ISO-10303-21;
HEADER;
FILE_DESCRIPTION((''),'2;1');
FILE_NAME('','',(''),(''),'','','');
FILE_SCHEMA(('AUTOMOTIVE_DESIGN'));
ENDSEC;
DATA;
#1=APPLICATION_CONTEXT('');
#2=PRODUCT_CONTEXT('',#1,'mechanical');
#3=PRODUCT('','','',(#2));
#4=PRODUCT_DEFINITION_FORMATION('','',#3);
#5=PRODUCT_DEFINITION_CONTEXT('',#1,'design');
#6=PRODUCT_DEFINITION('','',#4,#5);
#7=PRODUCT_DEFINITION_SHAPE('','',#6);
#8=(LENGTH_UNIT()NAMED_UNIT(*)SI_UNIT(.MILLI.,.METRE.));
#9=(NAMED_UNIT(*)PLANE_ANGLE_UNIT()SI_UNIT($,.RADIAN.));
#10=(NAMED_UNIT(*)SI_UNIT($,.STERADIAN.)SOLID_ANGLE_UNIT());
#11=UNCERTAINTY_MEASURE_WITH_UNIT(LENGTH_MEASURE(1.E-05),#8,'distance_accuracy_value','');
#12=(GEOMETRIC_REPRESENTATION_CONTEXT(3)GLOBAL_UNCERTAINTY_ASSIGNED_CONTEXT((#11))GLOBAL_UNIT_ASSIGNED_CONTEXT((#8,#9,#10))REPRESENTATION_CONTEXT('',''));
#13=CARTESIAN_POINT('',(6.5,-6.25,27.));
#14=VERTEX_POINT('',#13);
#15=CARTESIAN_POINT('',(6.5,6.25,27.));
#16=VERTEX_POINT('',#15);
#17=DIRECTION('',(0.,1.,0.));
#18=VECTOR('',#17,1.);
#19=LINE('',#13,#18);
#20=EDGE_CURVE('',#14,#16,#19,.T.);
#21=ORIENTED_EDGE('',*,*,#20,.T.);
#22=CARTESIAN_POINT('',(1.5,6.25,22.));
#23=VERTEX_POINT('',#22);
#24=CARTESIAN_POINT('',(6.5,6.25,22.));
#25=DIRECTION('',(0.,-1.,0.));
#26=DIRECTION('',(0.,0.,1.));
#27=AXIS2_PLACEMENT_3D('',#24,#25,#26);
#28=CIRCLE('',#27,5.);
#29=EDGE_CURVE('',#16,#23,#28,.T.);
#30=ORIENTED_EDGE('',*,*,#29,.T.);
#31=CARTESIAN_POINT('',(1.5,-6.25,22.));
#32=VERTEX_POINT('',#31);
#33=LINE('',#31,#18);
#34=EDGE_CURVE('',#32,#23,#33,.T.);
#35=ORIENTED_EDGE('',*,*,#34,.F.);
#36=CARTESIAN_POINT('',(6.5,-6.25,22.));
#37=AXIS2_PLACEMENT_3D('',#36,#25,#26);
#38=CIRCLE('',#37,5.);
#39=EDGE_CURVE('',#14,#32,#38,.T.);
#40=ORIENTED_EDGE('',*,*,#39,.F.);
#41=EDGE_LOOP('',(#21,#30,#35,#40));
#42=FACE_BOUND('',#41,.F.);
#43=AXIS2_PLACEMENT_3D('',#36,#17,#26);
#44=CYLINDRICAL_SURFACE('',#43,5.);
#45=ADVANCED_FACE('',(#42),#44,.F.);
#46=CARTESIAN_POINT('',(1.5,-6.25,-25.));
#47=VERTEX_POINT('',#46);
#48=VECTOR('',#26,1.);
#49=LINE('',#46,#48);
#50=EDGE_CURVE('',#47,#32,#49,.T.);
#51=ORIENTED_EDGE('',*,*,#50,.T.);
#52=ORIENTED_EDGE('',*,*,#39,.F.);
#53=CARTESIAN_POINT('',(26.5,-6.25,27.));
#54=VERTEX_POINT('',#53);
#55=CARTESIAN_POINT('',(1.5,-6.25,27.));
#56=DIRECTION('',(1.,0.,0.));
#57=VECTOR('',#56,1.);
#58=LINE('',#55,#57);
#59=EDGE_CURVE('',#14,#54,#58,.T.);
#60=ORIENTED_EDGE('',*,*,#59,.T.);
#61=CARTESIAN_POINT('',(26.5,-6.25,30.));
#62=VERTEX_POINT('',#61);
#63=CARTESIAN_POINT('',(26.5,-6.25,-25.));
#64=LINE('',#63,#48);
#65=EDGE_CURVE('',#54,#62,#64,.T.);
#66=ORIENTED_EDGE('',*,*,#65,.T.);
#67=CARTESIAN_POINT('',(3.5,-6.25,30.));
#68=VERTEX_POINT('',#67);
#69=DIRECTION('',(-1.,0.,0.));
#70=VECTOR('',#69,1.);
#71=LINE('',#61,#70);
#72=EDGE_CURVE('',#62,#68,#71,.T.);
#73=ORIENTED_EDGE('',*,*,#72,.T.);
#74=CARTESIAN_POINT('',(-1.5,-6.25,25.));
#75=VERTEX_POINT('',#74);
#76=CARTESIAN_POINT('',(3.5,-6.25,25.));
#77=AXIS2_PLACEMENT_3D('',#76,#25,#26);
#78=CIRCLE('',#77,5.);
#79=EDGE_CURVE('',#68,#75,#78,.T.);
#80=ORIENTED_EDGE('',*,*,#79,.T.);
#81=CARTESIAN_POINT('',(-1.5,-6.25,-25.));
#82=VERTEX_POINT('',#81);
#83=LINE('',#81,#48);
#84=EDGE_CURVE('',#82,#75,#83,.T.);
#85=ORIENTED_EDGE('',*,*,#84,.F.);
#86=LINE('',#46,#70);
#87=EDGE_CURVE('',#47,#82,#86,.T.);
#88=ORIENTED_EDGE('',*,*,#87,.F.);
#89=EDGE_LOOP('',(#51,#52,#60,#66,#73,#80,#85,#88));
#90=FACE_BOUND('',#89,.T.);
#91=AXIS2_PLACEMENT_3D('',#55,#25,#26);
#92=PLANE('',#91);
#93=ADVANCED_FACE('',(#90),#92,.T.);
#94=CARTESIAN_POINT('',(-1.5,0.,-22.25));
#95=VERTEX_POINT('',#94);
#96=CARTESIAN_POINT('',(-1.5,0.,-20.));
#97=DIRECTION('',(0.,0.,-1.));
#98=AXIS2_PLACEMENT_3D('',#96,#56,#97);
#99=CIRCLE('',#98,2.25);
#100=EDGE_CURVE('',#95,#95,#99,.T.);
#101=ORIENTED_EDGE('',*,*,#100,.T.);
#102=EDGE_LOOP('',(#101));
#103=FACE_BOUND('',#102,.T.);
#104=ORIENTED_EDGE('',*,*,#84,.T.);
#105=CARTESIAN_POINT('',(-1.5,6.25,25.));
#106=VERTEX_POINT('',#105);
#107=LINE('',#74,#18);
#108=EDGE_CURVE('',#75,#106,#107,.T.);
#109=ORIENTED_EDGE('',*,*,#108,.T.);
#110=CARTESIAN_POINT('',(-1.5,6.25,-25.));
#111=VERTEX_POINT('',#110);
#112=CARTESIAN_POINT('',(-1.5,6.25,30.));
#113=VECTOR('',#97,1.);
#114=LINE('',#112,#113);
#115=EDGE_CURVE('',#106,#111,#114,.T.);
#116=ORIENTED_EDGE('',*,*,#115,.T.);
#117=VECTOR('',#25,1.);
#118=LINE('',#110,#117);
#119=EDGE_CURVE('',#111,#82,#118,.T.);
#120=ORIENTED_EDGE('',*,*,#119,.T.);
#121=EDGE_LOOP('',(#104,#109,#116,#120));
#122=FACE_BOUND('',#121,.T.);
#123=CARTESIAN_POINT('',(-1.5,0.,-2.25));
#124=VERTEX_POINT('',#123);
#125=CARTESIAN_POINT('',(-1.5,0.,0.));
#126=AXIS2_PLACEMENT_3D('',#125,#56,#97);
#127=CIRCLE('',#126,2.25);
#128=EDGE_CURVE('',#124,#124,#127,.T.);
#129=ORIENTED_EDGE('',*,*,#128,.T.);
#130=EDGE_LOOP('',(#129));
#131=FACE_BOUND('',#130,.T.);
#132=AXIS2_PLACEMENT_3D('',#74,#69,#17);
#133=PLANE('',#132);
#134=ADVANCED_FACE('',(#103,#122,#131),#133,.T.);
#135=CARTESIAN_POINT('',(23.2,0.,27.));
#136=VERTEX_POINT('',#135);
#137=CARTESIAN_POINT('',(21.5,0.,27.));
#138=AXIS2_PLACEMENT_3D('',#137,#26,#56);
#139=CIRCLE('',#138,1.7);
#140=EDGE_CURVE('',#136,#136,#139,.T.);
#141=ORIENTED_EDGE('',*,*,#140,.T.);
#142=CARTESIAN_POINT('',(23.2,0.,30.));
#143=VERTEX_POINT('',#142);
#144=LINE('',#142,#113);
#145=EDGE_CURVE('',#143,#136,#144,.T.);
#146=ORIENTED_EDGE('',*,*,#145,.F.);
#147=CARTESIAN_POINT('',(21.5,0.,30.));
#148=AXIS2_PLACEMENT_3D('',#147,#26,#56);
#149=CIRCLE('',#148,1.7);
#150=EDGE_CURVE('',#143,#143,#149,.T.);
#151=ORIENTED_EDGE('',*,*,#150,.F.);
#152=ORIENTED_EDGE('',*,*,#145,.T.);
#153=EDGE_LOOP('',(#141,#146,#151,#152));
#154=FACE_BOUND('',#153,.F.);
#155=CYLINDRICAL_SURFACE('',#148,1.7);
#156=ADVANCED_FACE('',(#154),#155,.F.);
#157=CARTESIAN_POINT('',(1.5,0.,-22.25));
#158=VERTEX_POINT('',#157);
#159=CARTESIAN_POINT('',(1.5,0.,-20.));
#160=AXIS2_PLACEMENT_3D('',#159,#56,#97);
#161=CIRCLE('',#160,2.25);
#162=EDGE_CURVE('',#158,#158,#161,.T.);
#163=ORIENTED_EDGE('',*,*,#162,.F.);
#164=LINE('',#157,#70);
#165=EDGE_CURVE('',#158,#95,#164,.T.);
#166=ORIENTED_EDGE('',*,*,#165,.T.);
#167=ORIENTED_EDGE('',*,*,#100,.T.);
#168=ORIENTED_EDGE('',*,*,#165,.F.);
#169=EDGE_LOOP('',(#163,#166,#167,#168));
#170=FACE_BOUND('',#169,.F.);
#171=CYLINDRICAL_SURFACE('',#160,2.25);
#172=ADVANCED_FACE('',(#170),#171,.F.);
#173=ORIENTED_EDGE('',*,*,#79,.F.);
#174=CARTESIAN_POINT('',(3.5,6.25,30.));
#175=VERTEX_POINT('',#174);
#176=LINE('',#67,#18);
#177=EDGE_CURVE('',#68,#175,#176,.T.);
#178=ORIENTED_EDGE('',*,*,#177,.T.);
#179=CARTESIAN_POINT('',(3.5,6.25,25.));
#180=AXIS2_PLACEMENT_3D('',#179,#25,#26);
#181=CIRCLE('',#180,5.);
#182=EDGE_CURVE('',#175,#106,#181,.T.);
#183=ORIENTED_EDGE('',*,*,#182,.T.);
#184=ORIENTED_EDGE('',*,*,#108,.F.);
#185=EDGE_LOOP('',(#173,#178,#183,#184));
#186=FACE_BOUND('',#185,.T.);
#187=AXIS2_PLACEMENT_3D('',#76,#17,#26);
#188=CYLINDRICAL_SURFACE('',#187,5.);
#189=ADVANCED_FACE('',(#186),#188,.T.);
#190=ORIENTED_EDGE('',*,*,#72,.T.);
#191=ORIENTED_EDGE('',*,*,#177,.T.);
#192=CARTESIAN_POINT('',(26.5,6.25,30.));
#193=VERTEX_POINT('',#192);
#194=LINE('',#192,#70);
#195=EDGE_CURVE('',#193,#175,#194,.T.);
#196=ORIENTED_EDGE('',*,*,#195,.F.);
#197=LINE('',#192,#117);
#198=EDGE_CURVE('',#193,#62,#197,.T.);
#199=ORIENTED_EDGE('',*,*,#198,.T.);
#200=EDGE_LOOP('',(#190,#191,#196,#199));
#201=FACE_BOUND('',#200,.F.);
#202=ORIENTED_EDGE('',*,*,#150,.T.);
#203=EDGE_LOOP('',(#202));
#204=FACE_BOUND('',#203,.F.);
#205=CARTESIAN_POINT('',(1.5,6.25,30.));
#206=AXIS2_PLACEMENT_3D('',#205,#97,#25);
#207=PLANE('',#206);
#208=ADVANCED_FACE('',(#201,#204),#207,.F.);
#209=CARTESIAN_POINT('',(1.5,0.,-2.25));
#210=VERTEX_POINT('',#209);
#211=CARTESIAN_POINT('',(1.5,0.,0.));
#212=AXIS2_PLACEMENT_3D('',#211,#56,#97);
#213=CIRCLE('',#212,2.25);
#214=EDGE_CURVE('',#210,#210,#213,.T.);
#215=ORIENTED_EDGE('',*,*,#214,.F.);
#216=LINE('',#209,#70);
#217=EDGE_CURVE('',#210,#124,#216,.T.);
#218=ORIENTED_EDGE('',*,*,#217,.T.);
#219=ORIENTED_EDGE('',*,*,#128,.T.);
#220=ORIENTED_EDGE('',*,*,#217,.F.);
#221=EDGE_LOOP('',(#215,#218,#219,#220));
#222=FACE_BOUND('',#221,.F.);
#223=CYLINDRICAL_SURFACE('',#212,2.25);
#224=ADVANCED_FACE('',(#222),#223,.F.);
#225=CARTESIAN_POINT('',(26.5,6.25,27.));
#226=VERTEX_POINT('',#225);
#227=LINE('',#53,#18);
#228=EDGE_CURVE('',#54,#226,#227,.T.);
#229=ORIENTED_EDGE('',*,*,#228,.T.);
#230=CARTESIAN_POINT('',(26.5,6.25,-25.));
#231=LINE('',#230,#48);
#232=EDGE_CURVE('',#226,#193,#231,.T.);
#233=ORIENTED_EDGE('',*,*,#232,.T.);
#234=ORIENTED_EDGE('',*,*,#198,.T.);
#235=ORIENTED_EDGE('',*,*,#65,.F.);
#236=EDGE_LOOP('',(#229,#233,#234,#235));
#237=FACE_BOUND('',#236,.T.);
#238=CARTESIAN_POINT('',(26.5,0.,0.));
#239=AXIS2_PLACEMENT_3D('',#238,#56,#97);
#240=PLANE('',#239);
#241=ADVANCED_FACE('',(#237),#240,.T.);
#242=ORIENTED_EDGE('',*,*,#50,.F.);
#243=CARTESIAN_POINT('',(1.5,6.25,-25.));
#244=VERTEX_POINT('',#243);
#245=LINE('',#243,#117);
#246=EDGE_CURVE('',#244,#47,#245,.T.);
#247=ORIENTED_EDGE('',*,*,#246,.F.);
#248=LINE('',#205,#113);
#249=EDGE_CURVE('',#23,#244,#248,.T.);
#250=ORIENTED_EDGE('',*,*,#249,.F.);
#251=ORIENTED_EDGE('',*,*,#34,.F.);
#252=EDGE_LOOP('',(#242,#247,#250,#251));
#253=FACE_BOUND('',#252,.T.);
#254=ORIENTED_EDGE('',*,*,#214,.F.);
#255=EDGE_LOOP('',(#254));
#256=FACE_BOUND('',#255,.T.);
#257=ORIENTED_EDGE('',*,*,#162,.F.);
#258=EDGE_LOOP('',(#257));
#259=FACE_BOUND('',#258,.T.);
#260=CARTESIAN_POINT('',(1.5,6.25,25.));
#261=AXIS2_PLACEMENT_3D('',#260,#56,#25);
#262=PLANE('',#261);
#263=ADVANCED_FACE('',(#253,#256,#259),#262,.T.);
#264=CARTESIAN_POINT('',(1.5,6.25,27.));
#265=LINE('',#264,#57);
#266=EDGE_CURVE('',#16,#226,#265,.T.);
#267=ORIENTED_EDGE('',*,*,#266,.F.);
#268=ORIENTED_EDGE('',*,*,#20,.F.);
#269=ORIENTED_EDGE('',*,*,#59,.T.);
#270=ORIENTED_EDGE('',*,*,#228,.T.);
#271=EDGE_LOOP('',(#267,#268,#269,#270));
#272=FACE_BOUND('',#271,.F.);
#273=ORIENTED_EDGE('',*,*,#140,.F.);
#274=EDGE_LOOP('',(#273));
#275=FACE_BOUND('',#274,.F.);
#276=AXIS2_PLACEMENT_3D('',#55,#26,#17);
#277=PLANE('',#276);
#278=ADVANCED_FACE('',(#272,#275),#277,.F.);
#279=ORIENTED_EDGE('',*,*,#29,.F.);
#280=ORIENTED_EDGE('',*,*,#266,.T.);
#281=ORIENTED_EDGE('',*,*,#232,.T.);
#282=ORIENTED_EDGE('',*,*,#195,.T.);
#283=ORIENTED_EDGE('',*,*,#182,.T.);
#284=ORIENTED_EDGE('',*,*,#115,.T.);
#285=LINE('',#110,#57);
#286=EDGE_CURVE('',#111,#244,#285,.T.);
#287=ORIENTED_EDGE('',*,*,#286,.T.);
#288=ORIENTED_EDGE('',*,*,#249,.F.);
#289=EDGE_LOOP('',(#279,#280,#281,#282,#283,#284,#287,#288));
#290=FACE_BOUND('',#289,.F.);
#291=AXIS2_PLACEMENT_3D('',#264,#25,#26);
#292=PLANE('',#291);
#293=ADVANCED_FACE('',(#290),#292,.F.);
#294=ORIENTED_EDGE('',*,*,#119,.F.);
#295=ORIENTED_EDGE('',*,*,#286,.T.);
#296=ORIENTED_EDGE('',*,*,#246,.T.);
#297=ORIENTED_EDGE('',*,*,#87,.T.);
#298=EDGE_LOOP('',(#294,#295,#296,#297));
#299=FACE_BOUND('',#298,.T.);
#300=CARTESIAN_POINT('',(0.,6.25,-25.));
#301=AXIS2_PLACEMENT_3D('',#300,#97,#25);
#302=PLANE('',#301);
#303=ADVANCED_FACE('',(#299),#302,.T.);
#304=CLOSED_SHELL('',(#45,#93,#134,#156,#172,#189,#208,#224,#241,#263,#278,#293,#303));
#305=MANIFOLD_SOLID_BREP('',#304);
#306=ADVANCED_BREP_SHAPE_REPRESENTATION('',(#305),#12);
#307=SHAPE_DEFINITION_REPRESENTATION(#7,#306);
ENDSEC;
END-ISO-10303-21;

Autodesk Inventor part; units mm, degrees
ref_plane "YZ Plane" through (0, 0, 0) normal (1, 0, 0) x (0, 1, 0)
ref_plane "XZ Plane" through (0, 0, 0) normal (0, 1, 0) x (-1, 0, 0)
ref_plane "XY Plane" through (0, 0, 0) normal (0, 0, 1) x (1, 0, 0)
sketch "スケッチ1" plane through (0, 0, 0) normal (1, 0, 0) x (0, 1, 0)
  line L0 (6.25, -25) -> (-6.25, -25)
  line L1 (-6.25, -25) -> (-6.25, 25)
  line L2 (-6.25, 25) -> (6.25, 25)
  line L3 (6.25, 25) -> (6.25, -25)
  line L4 (6.25, -25) -> (-6.25, 25) construction
  line L5 (-6.25, -25) -> (6.25, 25) construction
  point P0 (0, 0)
  dimension "d0" = 12.5
  dimension "d1" = 50
extrude "押し出し1" add sketch "スケッチ1" along normal mid plane 3
sketch "スケッチ2" plane through (1.5, 0, 0) normal (1, 0, 0) x (0, 0, -1)
  circle A0 centre (20, 0) radius 2.25
  circle A1 centre (0, 0) radius 2.25
  dimension "d4" = 4.5
  dimension "d5" = 4.5
extrude "押し出し2" cut sketch "スケッチ2" against normal blind 3
sketch "スケッチ3" plane through (-1.5, -6.25, 25) normal (0, 0, 1) x (1, 0, 0)
  line L0 (0, 0) -> (0, 12.5) projected
  line L1 (3, 12.5) -> (3, 0) projected
  line L2 (0, 0) -> (3, 0)
  line L3 (3, 0) -> (3, 12.5)
  line L4 (3, 12.5) -> (0, 12.5)
  line L5 (0, 12.5) -> (0, 0)
  point P0 (1.5, 6.25)
extrude "押し出し3" add sketch "スケッチ3" along normal blind 5
sketch "スケッチ4" plane through (1.5, 0, 0) normal (1, 0, 0) x (0, 0, -1)
  line L0 (25, -6.25) -> (-30, -6.25) projected
  line L1 (25, 6.25) -> (-30, 6.25) projected
  line L2 (-30, -6.25) -> (-27, -6.25)
  line L3 (-27, -6.25) -> (-27, 6.25)
  line L4 (-27, 6.25) -> (-30, 6.25)
  line L5 (-30, 6.25) -> (-30, -6.25)
  point P0 (0, 0)
  dimension "d10" = 3
extrude "押し出し4" add sketch "スケッチ4" along normal blind 25
fillet "フィレット1" radius 5 1 edges at (1.5, 0, 27)
fillet "フィレット2" radius 5 1 edges at (-1.5, 0, 30)
sketch "スケッチ5" plane through (-1.5, -6.25, 30) normal (0, 0, 1) x (1, 0, 0)
  circle A0 centre (23, 6.25) radius 1.7
  point P0 (1.5, 6.25)
  dimension "d15" = 3.4
extrude "押し出し5" cut sketch "スケッチ5" against normal blind 25
properties part number "Scissor_fixing_parts" material "ABS プラスチック"
